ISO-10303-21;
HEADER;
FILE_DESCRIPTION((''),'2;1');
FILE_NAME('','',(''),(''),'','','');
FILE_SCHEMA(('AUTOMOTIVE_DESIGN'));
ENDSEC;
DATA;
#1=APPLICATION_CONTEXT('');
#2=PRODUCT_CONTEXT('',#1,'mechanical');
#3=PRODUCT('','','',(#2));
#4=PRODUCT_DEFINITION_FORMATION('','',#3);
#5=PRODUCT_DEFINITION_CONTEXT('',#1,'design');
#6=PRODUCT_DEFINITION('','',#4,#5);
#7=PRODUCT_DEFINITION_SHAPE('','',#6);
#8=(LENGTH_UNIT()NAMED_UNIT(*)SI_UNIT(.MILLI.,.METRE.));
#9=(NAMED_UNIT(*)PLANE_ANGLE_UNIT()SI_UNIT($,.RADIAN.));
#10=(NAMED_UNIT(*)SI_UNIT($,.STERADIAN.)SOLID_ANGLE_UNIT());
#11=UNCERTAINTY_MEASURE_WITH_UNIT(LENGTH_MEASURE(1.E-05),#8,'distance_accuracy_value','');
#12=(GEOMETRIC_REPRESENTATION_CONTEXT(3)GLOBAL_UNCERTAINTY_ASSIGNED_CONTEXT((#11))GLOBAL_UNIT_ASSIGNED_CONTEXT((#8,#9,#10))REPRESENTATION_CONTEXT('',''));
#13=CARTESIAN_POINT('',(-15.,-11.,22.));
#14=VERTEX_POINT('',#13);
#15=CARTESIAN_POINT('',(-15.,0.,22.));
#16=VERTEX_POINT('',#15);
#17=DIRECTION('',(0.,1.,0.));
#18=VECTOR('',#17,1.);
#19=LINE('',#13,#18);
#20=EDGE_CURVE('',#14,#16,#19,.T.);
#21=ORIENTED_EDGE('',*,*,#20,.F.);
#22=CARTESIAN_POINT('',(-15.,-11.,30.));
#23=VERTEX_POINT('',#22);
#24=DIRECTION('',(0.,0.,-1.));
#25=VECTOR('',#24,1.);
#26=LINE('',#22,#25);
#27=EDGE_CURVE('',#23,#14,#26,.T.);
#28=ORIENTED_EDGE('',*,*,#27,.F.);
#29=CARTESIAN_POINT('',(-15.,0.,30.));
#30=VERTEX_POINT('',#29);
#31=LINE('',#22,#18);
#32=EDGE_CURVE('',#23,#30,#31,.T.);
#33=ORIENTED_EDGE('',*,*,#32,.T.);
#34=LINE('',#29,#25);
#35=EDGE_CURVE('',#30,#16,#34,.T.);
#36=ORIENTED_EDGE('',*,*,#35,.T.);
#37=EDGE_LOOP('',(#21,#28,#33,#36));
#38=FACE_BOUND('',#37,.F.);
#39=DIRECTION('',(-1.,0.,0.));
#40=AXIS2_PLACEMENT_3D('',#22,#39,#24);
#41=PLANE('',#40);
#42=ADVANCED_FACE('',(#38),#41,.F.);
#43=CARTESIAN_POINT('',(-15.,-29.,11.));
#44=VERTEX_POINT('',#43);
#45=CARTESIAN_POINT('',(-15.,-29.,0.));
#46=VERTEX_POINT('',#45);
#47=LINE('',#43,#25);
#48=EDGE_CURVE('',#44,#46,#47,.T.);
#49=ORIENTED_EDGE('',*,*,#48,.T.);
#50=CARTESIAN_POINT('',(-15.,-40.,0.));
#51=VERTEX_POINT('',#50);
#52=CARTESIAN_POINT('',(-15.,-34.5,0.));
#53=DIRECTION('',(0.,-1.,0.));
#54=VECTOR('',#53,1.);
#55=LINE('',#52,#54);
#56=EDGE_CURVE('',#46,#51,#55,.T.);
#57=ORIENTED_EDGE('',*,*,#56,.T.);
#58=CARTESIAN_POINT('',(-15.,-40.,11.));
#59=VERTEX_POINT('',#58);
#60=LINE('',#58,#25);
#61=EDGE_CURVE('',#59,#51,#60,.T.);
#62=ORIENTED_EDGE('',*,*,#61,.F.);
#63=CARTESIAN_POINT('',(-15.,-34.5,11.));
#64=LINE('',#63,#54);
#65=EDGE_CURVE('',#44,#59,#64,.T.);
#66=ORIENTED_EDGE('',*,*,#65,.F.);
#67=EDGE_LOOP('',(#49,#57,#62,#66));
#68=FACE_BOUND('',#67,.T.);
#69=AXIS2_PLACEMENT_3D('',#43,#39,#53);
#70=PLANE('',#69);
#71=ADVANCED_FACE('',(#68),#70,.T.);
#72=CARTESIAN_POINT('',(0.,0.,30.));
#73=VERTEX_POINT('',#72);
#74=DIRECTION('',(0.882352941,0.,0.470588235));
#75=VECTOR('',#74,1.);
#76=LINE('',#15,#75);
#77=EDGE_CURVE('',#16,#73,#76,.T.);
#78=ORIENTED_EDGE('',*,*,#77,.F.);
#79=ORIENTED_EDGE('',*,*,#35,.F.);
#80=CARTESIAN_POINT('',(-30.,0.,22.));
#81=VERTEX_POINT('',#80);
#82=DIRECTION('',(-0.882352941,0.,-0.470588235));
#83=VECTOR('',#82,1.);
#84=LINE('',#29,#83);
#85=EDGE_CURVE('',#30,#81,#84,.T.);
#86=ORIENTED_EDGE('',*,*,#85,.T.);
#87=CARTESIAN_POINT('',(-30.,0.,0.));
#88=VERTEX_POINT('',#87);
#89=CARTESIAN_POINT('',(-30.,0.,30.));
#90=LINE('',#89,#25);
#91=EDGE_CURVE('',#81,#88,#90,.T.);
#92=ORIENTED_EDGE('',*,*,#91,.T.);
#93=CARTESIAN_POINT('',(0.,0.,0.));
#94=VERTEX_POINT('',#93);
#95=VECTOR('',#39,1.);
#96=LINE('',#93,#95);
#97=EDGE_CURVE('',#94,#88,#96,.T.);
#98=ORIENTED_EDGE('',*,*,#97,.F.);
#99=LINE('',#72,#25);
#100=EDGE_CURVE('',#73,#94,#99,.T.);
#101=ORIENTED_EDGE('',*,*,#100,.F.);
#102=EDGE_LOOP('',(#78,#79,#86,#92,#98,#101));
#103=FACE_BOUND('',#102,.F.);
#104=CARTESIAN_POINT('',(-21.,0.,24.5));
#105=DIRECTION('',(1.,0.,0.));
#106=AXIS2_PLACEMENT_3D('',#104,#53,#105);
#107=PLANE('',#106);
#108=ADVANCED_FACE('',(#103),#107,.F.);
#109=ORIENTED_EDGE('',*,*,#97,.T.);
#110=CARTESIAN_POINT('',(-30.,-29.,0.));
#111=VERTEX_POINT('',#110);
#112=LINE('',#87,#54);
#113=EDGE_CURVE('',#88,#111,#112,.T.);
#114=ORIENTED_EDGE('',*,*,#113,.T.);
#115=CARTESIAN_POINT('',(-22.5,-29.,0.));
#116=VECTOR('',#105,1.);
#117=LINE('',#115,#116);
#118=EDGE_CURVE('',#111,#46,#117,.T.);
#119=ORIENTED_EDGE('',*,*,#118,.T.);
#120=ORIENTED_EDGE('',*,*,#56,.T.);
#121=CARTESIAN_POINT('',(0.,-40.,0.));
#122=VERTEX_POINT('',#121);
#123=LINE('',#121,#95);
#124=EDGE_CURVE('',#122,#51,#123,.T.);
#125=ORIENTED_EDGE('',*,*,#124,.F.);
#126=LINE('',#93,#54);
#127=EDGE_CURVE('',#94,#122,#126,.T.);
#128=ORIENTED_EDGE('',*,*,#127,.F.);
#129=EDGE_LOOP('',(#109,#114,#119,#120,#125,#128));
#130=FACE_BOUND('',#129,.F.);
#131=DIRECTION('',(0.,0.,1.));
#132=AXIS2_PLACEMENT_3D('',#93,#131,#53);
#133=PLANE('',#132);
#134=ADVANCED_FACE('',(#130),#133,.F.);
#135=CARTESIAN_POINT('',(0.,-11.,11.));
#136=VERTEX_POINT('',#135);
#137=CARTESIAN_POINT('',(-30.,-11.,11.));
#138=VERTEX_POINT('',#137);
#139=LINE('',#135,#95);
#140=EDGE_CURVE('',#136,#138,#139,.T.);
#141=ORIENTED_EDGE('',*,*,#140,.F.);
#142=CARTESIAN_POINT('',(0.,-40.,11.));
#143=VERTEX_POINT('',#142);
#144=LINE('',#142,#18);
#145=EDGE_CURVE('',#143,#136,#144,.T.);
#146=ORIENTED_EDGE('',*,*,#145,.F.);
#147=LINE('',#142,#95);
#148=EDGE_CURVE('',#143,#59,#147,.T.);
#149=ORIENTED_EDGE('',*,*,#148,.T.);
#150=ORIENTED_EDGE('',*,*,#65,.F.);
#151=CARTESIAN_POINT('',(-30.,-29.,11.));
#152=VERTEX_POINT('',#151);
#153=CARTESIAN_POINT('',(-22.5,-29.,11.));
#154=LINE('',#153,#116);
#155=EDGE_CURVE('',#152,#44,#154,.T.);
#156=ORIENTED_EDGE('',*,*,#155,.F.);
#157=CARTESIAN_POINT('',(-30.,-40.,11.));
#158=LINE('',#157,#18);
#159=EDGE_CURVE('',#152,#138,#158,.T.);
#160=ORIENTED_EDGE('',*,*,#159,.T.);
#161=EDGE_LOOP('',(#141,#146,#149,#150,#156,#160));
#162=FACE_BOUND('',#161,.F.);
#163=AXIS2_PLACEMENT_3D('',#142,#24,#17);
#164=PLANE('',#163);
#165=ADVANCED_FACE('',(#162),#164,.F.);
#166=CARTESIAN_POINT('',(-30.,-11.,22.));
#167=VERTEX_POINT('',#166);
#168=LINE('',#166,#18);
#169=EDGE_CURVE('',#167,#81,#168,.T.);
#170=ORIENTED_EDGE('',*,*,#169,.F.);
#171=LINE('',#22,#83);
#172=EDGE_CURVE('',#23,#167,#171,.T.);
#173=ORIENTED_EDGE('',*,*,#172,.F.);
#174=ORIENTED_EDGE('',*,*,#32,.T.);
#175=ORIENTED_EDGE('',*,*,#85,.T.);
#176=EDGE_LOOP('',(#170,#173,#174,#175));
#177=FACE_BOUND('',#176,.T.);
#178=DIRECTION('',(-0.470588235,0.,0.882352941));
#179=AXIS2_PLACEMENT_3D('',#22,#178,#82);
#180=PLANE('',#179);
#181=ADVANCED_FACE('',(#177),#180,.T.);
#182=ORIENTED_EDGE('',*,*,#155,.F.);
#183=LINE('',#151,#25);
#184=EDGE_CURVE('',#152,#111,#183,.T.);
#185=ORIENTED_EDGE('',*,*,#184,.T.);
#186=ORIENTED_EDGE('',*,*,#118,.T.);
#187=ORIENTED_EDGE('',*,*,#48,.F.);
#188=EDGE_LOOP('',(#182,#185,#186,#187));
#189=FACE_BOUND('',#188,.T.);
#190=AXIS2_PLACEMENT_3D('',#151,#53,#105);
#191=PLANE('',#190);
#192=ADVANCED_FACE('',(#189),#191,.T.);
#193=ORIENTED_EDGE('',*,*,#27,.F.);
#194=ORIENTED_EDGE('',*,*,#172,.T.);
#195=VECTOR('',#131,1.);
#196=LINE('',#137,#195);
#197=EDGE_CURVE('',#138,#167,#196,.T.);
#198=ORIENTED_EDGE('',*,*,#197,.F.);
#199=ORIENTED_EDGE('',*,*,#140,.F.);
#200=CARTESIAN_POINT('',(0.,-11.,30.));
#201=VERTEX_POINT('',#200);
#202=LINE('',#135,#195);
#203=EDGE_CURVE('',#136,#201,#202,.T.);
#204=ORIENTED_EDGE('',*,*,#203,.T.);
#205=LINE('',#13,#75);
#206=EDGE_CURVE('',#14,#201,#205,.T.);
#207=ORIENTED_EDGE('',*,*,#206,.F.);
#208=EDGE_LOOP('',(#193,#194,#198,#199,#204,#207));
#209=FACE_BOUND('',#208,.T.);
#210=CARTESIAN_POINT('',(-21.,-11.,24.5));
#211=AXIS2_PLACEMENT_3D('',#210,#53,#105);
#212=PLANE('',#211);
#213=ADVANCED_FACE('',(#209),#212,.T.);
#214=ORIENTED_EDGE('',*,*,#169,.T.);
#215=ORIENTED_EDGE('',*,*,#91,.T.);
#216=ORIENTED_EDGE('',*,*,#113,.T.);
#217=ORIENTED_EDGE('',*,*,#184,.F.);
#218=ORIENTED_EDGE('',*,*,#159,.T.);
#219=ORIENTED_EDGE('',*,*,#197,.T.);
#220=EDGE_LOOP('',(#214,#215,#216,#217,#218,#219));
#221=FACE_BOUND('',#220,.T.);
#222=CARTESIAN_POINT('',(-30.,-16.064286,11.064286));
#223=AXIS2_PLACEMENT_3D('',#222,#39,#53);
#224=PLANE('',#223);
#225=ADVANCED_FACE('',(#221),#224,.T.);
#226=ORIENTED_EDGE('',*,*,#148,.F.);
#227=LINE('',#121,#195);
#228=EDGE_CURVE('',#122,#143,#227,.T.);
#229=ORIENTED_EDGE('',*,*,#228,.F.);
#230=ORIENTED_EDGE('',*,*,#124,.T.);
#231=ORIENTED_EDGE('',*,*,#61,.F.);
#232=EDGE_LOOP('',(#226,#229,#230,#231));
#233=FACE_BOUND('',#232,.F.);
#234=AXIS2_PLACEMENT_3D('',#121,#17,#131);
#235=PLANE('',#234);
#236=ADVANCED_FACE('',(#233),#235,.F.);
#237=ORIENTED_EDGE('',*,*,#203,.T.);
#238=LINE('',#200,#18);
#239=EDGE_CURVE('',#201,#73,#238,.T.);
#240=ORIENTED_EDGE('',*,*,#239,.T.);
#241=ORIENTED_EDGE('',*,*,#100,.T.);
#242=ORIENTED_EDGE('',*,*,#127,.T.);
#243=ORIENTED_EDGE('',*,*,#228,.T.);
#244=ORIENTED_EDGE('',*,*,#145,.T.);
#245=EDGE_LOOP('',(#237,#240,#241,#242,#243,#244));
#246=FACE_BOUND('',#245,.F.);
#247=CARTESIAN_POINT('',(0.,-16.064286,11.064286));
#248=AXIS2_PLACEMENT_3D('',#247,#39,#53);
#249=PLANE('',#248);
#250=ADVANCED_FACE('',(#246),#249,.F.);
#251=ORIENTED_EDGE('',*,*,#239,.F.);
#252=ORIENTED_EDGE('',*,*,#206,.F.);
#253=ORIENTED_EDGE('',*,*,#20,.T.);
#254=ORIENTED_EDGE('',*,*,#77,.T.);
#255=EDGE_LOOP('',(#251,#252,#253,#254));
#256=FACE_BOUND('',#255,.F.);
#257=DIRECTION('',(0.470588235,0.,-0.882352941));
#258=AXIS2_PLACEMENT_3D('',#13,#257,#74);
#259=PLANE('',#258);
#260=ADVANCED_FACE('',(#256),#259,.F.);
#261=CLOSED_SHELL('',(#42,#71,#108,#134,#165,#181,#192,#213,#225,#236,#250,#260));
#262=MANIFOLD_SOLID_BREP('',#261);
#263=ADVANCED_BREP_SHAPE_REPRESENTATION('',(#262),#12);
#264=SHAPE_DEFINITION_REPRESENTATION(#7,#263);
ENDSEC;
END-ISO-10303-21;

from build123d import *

# Parameters (mm, degrees)
F1_DEPTH  = 30
F2_W      = 11
F2_H      = 15
F3_DEPTH  = 11
F4_W      = 15
F4_H      = 8
F5_DEPTH  = 11
F6_ANGLE  = -90
F8_DEPTH  = 11
F10_DEPTH = 11


with BuildPart() as f1:
    # F0 (on Front) → F1 (new body)
    with BuildSketch(Plane.XZ):
        Polygon((0, 30), (0, 0), (40, 0), (40, 11), (11, 11), (11, 30), align=None)
    extrude(amount=F1_DEPTH)

    # F2 (on face) → F3 (cut, through all)
    with BuildSketch(Plane.XY.offset(11)):
        with Locations((34.5, -22.5)):
            Rectangle(F2_W, F2_H)
    extrude(amount=-F3_DEPTH, mode=Mode.SUBTRACT)

    # F4 (on face) → F5 (cut, through all)
    with BuildSketch(Plane.YZ.offset(11)):
        with Locations((-22.5, 26)):
            Rectangle(F4_W, F4_H)
    extrude(amount=-F5_DEPTH, mode=Mode.SUBTRACT)


with BuildPart() as f1_1:
    # F6: moved
    add(f1.part.rotate(Axis((0, 0, 15), (0, 0, 1)), F6_ANGLE))

    # F7 (on face) → F8 (join, through all)
    with BuildSketch(Plane.XZ.offset(11)):
        Polygon((-15, 22), (-15, 30), (-30, 22), align=None)
    extrude(amount=-F8_DEPTH)

    # F9 (on face) → F10 (cut, through all)
    with BuildSketch(Plane.XZ.offset(11)):
        Polygon((0, 30), (-15, 30), (-15, 22), align=None)
    extrude(amount=-F10_DEPTH, mode=Mode.SUBTRACT)


solid = f1_1.part
